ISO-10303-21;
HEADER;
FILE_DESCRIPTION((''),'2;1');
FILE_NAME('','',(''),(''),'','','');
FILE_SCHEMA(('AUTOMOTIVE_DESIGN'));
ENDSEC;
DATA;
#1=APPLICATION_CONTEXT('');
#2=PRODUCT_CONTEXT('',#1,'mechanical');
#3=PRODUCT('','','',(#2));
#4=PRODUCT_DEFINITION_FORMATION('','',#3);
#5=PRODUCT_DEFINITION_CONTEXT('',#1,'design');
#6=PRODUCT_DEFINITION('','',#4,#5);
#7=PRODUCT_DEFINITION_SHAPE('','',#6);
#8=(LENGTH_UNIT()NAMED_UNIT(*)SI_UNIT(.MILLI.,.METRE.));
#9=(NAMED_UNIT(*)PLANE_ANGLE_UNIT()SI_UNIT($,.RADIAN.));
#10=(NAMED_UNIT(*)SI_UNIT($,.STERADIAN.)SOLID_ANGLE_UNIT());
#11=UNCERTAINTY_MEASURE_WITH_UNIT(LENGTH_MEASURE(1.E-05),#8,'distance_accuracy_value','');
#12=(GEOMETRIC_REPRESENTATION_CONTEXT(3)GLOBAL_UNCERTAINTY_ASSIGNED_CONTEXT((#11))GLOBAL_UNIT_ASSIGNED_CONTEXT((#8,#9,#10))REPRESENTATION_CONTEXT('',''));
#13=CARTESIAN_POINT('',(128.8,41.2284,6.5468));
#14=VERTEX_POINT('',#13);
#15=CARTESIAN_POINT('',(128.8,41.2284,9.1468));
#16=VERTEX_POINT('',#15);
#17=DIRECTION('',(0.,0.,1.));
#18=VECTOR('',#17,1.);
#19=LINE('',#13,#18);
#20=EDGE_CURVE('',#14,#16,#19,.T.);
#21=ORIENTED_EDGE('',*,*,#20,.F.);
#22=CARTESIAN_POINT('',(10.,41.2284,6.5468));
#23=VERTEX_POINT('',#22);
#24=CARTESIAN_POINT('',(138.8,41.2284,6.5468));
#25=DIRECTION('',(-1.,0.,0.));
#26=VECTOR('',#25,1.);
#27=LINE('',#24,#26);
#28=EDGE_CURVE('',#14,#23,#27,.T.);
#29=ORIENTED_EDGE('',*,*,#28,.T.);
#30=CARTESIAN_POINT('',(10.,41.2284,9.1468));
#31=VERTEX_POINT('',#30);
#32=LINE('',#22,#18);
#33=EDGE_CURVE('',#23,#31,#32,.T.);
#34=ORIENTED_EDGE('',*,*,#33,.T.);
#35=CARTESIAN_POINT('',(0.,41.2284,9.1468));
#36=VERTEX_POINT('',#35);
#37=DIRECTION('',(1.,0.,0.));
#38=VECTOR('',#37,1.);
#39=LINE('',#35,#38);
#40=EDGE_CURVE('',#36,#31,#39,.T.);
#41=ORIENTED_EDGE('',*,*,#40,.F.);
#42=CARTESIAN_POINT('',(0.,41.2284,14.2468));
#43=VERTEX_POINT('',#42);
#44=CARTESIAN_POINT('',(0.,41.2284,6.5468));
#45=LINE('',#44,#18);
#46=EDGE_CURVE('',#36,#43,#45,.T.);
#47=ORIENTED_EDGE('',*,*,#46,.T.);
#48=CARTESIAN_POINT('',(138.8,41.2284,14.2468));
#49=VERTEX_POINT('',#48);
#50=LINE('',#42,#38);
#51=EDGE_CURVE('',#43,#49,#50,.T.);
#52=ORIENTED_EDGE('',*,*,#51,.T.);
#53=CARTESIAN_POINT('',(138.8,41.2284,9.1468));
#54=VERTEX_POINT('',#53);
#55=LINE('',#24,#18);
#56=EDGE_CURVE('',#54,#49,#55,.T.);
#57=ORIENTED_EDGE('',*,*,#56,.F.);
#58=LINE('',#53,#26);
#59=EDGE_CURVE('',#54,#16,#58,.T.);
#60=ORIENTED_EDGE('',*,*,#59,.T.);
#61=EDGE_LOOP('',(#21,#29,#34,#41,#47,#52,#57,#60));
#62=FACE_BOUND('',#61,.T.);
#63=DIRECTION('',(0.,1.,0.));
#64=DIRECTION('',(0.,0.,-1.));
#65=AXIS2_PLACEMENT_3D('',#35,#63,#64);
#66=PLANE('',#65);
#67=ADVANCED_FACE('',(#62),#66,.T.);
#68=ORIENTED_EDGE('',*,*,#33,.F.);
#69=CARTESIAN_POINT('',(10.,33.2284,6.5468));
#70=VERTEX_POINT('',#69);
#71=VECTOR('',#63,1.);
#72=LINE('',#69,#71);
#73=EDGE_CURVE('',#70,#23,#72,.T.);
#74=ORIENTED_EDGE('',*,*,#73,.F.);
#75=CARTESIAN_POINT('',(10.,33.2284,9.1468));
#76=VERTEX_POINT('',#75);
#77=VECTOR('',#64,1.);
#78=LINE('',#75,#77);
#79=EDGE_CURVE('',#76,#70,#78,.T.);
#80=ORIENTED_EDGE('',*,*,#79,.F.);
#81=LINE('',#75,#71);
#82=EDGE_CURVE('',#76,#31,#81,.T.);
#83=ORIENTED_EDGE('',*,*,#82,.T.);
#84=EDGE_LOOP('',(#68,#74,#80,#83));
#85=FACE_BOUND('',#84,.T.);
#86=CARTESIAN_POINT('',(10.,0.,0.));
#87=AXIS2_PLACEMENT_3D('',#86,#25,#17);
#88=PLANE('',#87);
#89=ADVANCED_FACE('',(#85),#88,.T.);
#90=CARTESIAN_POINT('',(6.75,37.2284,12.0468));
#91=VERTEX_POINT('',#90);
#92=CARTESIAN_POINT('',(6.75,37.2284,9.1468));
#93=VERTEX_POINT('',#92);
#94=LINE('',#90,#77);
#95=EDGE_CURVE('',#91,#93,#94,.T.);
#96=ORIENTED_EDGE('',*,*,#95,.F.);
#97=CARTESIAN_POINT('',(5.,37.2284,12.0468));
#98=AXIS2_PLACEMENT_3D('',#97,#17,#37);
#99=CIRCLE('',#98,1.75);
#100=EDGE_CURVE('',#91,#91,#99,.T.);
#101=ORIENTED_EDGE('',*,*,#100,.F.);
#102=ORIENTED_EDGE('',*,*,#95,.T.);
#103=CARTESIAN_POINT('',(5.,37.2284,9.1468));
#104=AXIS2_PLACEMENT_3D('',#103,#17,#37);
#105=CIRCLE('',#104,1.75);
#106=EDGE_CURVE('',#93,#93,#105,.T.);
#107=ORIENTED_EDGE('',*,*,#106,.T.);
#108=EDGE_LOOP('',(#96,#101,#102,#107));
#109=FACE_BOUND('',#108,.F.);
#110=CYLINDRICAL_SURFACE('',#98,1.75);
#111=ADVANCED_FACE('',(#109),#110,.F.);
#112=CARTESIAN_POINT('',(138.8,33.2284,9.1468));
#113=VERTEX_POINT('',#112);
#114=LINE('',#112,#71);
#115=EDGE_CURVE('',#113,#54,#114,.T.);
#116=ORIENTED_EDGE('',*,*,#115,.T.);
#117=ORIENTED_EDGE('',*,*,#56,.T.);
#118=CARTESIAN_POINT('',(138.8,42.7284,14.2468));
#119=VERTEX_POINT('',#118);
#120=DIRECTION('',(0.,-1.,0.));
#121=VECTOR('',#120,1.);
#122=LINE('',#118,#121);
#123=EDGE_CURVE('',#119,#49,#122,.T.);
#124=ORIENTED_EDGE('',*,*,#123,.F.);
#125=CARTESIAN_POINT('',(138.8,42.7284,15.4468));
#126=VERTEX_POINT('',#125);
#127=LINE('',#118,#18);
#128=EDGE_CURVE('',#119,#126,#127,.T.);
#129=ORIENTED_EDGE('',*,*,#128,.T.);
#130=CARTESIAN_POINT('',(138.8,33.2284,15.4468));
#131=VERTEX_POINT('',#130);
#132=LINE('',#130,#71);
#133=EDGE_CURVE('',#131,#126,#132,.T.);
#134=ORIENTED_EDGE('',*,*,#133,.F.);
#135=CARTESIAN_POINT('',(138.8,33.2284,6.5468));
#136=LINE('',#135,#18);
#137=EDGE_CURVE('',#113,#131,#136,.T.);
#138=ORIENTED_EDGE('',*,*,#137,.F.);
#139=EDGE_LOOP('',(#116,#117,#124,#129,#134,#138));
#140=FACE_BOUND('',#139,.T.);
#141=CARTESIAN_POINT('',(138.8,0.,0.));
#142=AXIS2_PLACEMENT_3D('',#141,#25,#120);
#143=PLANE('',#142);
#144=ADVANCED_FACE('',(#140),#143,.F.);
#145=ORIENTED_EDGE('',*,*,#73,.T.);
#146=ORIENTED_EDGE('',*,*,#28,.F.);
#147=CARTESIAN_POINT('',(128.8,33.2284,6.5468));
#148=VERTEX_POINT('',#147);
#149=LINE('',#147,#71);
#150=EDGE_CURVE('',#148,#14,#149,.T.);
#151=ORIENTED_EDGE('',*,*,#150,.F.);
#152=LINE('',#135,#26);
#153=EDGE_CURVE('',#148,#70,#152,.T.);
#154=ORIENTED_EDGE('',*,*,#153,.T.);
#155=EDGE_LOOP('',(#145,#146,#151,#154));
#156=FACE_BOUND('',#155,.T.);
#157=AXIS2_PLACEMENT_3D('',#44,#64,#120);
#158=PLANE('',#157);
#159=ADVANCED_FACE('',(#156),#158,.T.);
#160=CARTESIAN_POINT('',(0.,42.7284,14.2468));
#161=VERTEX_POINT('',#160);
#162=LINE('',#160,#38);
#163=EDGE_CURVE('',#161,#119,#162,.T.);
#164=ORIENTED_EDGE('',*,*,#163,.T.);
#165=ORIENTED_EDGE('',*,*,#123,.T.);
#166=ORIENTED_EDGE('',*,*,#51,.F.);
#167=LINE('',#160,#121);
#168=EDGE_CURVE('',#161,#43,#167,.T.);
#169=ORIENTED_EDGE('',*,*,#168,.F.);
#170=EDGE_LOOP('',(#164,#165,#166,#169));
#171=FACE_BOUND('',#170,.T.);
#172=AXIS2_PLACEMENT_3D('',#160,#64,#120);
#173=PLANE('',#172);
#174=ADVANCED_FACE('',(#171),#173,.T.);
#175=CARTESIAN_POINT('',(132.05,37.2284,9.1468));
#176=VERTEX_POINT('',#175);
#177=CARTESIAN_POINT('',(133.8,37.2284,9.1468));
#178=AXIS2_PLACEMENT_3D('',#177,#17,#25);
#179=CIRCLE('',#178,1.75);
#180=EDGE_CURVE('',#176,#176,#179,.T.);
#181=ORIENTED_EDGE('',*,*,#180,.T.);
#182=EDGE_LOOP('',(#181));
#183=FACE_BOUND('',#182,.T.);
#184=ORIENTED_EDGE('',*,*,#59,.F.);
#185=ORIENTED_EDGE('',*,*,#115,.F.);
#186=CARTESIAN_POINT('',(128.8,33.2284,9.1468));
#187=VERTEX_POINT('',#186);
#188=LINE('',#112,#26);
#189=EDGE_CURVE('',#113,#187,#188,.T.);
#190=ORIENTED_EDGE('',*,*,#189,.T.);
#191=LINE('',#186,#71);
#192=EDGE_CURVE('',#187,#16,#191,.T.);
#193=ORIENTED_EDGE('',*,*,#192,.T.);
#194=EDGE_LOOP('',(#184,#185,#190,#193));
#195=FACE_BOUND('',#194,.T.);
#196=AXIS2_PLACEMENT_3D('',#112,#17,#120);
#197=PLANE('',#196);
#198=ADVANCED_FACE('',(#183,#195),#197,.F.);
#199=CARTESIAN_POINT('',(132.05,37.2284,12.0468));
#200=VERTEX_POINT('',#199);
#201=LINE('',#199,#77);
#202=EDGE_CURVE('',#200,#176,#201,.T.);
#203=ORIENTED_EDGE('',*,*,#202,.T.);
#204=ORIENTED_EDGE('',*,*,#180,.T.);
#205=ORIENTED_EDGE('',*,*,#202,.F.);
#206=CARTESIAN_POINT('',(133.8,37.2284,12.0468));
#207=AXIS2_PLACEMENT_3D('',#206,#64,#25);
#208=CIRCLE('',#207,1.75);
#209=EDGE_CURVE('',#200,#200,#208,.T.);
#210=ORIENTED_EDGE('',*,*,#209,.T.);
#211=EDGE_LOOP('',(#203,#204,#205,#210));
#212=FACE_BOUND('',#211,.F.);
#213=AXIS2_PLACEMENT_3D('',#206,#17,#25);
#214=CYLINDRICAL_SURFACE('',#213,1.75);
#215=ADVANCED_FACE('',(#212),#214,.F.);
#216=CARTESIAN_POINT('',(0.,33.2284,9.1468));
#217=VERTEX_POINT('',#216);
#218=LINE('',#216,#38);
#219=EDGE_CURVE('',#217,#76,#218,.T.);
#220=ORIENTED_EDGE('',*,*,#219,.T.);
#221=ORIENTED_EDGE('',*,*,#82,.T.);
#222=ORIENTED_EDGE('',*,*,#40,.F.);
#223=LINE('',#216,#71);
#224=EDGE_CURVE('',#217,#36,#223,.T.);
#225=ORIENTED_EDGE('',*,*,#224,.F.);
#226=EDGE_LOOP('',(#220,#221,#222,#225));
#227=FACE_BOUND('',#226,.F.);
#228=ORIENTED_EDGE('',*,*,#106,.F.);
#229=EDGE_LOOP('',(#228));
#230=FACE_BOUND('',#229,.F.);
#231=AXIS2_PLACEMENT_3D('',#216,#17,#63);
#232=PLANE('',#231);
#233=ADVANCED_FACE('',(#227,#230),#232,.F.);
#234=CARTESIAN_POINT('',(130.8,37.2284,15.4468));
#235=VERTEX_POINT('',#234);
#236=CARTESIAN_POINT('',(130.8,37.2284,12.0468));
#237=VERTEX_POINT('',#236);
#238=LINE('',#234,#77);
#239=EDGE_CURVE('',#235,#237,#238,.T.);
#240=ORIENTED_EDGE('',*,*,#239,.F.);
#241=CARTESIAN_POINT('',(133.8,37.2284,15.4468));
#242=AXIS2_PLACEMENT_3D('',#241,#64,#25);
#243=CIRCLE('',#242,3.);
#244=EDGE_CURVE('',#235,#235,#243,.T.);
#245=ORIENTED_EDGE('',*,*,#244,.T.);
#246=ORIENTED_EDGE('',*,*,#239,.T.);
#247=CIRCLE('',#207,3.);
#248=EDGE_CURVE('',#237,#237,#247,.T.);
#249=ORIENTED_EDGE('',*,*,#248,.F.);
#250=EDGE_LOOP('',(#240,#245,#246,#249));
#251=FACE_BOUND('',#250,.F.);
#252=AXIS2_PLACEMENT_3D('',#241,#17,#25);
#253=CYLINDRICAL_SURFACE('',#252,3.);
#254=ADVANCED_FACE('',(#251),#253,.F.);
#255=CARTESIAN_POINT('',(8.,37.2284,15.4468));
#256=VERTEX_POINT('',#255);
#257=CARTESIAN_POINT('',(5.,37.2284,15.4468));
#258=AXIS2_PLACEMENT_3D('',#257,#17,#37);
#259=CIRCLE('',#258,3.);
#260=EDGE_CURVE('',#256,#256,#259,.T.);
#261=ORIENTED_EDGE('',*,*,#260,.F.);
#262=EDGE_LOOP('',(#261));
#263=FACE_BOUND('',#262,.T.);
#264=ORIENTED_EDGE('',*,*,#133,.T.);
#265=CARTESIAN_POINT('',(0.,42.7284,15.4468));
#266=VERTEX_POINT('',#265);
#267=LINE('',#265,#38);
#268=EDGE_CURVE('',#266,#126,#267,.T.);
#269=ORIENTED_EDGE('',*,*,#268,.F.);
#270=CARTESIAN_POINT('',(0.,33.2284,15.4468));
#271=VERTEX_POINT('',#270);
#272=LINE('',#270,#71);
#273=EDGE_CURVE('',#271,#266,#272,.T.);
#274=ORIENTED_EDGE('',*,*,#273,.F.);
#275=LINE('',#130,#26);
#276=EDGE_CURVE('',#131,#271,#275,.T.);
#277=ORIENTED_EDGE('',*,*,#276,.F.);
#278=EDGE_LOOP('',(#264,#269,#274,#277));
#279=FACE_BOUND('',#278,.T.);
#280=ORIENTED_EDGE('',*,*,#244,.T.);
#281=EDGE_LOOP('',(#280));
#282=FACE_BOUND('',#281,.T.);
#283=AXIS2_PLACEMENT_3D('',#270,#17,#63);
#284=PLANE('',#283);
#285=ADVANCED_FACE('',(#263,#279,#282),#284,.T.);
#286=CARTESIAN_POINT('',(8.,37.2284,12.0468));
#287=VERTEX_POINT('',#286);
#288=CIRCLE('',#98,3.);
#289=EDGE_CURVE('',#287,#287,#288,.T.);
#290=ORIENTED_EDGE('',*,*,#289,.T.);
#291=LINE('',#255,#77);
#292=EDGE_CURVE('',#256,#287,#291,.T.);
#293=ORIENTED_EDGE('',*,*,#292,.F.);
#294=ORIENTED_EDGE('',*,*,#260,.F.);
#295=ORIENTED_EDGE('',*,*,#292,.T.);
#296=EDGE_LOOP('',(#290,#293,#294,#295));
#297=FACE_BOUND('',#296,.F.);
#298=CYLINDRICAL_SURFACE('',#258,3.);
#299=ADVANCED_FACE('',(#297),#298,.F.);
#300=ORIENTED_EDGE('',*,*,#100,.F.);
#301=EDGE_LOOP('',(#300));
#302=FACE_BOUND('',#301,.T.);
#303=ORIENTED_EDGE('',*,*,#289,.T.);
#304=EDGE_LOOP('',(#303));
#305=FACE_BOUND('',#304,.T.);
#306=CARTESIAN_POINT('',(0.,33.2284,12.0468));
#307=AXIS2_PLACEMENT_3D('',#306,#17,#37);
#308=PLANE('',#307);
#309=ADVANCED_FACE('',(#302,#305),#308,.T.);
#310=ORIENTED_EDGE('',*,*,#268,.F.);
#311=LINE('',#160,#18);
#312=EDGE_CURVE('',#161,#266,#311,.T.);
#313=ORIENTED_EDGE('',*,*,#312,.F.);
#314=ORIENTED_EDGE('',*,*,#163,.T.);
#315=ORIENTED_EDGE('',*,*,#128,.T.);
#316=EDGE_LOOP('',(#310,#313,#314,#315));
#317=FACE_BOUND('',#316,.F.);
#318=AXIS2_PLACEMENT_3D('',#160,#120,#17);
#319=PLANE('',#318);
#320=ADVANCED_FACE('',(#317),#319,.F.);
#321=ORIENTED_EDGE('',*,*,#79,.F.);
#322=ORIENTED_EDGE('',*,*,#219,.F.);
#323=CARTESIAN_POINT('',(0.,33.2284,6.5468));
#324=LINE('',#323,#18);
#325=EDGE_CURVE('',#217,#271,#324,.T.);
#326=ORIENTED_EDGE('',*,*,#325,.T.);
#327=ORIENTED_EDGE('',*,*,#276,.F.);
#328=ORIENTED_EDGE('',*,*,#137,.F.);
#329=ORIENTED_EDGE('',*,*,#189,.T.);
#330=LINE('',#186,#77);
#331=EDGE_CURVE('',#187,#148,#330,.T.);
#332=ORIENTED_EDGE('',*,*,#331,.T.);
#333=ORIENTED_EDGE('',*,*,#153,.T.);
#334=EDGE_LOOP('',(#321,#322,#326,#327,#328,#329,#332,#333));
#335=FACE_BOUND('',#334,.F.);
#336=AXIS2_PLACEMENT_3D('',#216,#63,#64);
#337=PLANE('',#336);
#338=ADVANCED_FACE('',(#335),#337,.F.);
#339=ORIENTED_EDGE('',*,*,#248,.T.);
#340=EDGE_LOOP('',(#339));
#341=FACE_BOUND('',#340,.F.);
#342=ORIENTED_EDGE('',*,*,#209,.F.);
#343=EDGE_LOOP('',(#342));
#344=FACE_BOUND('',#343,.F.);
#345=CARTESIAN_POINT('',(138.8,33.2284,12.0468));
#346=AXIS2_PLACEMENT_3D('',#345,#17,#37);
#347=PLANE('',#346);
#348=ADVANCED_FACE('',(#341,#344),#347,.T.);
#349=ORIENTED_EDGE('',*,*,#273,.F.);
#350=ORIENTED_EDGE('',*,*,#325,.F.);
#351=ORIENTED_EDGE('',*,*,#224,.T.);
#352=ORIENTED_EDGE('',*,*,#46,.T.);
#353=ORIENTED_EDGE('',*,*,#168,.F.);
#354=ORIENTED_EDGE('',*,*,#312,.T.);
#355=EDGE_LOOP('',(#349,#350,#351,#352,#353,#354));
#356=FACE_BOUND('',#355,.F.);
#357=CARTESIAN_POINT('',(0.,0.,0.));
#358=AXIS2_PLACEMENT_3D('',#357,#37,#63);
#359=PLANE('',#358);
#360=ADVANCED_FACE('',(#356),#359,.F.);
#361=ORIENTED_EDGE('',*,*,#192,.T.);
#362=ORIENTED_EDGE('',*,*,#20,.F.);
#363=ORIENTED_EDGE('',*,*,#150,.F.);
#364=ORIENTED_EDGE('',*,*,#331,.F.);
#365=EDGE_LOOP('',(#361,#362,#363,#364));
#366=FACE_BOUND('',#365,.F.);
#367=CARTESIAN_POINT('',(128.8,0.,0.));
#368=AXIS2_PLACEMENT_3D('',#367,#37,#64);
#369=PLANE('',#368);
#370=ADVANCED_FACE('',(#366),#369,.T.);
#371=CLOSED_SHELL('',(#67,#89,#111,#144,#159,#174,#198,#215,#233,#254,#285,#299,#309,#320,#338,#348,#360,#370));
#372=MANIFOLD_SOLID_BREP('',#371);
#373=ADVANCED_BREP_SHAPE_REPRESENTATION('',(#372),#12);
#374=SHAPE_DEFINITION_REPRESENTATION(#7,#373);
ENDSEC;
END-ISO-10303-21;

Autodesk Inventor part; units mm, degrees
ref_plane "YZ Plane" through (0, 0, 0) normal (1, 0, 0) x (0, 1, 0)
ref_plane "XZ Plane" through (0, 0, 0) normal (0, 1, 0) x (-1, 0, 0)
ref_plane "XY Plane" through (0, 0, 0) normal (0, 0, 1) x (1, 0, 0)
sketch "Skizze2" plane through (0, 0, 0) normal (1, 0, 0) x (0, 1, 0)
  line L0 (33.2284, 9.1468) -> (33.2284, 6.5468)
  line L1 (33.2284, 9.1468) -> (33.2284, 15.4468)
  line L2 (33.2284, 15.4468) -> (42.7284, 15.4468)
  line L3 (41.2284, 6.5468) -> (33.2284, 6.5468)
  line L4 (42.7284, 14.2468) -> (41.2284, 14.2468)
  line L5 (42.7284, 14.2468) -> (42.7284, 15.4468)
  line L6 (33.2284, 15.4468) -> (42.7284, 15.4468)
  line L7 (33.2284, 9.1468) -> (33.2284, 15.4468)
  line L8 (33.2284, 9.1468) -> (41.2284, 9.1468)
  line L9 (41.2284, 14.2468) -> (41.2284, 9.1468)
  line L10 (42.7284, 14.2468) -> (42.7284, 15.4468)
  line L11 (41.2284, 9.1468) -> (41.2284, 6.5468)
  point P0 (0, 0)
extrude "Extrusion1" add sketch "Skizze2" along normal blind 69.4
sketch "Skizze3" plane through (0, 0, 0) normal (-1, 0, 0) x (0, 0, 1)
  line L0 (14.2468, 42.7284) -> (14.2468, 41.2284) projected
  line L1 (14.2468, 42.7284) -> (15.4468, 42.7284) projected
  line L2 (15.4468, 33.2284) -> (15.4468, 42.7284) projected
  line L3 (9.1468, 33.2284) -> (15.4468, 33.2284) projected
  line L4 (9.1468, 33.2284) -> (9.1468, 41.2284) projected
  line L5 (14.2468, 41.2284) -> (9.1468, 41.2284) projected
  line L6 (6.5468, 33.2284) -> (6.5468, 41.2284) projected
  line L7 (6.5468, 41.2284) -> (9.1468, 41.2284)
  line L8 (9.1468, 41.2284) -> (9.1468, 33.2284)
  line L9 (9.1468, 33.2284) -> (6.5468, 33.2284)
  line L10 (6.5468, 33.2284) -> (6.5468, 41.2284)
  point P0 (0, 0)
extrude "Extrusion2" cut sketch "Skizze3" against normal blind 10 contours L4 L9 L6 L7
sketch "Skizze4" plane through (0, 33.2284, 15.4468) normal (0, 0, 1) x (1, 0, 0)
  line L0 (0, 0) -> (10, 0) construction
  line L1 (5, 0) -> (5, 9.5) construction
  line L2 (0, 9.5) -> (69.4, 9.5) construction
  circle A0 centre (5, 4) radius 3
  line L3 (0, 9.5) -> (0, 0) construction
  point P0 (0, -33.2284)
  dimension "d4" = 6
  dimension "d5" = 5
  dimension "d6" = 4
extrude "Extrusion3" cut sketch "Skizze4" against normal blind 3.4
sketch "Skizze5" plane through (5, 37.2284, 12.0468) normal (0, 0, 1) x (1, 0, 0)
  circle A0 centre (0, 0) radius 3 projected
  circle A1 centre (0, 0) radius 1.75
  point P0 (-5, -37.2284)
  dimension "d9" = 3.5
extrude "Extrusion4" cut sketch "Skizze5" against normal blind 3.4 contours A1
mirror "Spiegeln1" about plane through (69.4, 37.2284, 7.8468) normal (1, 0, 0) of "Extrusion4", "Extrusion3", "Extrusion2", "Extrusion1"
properties part number "Case_bottom_front"
